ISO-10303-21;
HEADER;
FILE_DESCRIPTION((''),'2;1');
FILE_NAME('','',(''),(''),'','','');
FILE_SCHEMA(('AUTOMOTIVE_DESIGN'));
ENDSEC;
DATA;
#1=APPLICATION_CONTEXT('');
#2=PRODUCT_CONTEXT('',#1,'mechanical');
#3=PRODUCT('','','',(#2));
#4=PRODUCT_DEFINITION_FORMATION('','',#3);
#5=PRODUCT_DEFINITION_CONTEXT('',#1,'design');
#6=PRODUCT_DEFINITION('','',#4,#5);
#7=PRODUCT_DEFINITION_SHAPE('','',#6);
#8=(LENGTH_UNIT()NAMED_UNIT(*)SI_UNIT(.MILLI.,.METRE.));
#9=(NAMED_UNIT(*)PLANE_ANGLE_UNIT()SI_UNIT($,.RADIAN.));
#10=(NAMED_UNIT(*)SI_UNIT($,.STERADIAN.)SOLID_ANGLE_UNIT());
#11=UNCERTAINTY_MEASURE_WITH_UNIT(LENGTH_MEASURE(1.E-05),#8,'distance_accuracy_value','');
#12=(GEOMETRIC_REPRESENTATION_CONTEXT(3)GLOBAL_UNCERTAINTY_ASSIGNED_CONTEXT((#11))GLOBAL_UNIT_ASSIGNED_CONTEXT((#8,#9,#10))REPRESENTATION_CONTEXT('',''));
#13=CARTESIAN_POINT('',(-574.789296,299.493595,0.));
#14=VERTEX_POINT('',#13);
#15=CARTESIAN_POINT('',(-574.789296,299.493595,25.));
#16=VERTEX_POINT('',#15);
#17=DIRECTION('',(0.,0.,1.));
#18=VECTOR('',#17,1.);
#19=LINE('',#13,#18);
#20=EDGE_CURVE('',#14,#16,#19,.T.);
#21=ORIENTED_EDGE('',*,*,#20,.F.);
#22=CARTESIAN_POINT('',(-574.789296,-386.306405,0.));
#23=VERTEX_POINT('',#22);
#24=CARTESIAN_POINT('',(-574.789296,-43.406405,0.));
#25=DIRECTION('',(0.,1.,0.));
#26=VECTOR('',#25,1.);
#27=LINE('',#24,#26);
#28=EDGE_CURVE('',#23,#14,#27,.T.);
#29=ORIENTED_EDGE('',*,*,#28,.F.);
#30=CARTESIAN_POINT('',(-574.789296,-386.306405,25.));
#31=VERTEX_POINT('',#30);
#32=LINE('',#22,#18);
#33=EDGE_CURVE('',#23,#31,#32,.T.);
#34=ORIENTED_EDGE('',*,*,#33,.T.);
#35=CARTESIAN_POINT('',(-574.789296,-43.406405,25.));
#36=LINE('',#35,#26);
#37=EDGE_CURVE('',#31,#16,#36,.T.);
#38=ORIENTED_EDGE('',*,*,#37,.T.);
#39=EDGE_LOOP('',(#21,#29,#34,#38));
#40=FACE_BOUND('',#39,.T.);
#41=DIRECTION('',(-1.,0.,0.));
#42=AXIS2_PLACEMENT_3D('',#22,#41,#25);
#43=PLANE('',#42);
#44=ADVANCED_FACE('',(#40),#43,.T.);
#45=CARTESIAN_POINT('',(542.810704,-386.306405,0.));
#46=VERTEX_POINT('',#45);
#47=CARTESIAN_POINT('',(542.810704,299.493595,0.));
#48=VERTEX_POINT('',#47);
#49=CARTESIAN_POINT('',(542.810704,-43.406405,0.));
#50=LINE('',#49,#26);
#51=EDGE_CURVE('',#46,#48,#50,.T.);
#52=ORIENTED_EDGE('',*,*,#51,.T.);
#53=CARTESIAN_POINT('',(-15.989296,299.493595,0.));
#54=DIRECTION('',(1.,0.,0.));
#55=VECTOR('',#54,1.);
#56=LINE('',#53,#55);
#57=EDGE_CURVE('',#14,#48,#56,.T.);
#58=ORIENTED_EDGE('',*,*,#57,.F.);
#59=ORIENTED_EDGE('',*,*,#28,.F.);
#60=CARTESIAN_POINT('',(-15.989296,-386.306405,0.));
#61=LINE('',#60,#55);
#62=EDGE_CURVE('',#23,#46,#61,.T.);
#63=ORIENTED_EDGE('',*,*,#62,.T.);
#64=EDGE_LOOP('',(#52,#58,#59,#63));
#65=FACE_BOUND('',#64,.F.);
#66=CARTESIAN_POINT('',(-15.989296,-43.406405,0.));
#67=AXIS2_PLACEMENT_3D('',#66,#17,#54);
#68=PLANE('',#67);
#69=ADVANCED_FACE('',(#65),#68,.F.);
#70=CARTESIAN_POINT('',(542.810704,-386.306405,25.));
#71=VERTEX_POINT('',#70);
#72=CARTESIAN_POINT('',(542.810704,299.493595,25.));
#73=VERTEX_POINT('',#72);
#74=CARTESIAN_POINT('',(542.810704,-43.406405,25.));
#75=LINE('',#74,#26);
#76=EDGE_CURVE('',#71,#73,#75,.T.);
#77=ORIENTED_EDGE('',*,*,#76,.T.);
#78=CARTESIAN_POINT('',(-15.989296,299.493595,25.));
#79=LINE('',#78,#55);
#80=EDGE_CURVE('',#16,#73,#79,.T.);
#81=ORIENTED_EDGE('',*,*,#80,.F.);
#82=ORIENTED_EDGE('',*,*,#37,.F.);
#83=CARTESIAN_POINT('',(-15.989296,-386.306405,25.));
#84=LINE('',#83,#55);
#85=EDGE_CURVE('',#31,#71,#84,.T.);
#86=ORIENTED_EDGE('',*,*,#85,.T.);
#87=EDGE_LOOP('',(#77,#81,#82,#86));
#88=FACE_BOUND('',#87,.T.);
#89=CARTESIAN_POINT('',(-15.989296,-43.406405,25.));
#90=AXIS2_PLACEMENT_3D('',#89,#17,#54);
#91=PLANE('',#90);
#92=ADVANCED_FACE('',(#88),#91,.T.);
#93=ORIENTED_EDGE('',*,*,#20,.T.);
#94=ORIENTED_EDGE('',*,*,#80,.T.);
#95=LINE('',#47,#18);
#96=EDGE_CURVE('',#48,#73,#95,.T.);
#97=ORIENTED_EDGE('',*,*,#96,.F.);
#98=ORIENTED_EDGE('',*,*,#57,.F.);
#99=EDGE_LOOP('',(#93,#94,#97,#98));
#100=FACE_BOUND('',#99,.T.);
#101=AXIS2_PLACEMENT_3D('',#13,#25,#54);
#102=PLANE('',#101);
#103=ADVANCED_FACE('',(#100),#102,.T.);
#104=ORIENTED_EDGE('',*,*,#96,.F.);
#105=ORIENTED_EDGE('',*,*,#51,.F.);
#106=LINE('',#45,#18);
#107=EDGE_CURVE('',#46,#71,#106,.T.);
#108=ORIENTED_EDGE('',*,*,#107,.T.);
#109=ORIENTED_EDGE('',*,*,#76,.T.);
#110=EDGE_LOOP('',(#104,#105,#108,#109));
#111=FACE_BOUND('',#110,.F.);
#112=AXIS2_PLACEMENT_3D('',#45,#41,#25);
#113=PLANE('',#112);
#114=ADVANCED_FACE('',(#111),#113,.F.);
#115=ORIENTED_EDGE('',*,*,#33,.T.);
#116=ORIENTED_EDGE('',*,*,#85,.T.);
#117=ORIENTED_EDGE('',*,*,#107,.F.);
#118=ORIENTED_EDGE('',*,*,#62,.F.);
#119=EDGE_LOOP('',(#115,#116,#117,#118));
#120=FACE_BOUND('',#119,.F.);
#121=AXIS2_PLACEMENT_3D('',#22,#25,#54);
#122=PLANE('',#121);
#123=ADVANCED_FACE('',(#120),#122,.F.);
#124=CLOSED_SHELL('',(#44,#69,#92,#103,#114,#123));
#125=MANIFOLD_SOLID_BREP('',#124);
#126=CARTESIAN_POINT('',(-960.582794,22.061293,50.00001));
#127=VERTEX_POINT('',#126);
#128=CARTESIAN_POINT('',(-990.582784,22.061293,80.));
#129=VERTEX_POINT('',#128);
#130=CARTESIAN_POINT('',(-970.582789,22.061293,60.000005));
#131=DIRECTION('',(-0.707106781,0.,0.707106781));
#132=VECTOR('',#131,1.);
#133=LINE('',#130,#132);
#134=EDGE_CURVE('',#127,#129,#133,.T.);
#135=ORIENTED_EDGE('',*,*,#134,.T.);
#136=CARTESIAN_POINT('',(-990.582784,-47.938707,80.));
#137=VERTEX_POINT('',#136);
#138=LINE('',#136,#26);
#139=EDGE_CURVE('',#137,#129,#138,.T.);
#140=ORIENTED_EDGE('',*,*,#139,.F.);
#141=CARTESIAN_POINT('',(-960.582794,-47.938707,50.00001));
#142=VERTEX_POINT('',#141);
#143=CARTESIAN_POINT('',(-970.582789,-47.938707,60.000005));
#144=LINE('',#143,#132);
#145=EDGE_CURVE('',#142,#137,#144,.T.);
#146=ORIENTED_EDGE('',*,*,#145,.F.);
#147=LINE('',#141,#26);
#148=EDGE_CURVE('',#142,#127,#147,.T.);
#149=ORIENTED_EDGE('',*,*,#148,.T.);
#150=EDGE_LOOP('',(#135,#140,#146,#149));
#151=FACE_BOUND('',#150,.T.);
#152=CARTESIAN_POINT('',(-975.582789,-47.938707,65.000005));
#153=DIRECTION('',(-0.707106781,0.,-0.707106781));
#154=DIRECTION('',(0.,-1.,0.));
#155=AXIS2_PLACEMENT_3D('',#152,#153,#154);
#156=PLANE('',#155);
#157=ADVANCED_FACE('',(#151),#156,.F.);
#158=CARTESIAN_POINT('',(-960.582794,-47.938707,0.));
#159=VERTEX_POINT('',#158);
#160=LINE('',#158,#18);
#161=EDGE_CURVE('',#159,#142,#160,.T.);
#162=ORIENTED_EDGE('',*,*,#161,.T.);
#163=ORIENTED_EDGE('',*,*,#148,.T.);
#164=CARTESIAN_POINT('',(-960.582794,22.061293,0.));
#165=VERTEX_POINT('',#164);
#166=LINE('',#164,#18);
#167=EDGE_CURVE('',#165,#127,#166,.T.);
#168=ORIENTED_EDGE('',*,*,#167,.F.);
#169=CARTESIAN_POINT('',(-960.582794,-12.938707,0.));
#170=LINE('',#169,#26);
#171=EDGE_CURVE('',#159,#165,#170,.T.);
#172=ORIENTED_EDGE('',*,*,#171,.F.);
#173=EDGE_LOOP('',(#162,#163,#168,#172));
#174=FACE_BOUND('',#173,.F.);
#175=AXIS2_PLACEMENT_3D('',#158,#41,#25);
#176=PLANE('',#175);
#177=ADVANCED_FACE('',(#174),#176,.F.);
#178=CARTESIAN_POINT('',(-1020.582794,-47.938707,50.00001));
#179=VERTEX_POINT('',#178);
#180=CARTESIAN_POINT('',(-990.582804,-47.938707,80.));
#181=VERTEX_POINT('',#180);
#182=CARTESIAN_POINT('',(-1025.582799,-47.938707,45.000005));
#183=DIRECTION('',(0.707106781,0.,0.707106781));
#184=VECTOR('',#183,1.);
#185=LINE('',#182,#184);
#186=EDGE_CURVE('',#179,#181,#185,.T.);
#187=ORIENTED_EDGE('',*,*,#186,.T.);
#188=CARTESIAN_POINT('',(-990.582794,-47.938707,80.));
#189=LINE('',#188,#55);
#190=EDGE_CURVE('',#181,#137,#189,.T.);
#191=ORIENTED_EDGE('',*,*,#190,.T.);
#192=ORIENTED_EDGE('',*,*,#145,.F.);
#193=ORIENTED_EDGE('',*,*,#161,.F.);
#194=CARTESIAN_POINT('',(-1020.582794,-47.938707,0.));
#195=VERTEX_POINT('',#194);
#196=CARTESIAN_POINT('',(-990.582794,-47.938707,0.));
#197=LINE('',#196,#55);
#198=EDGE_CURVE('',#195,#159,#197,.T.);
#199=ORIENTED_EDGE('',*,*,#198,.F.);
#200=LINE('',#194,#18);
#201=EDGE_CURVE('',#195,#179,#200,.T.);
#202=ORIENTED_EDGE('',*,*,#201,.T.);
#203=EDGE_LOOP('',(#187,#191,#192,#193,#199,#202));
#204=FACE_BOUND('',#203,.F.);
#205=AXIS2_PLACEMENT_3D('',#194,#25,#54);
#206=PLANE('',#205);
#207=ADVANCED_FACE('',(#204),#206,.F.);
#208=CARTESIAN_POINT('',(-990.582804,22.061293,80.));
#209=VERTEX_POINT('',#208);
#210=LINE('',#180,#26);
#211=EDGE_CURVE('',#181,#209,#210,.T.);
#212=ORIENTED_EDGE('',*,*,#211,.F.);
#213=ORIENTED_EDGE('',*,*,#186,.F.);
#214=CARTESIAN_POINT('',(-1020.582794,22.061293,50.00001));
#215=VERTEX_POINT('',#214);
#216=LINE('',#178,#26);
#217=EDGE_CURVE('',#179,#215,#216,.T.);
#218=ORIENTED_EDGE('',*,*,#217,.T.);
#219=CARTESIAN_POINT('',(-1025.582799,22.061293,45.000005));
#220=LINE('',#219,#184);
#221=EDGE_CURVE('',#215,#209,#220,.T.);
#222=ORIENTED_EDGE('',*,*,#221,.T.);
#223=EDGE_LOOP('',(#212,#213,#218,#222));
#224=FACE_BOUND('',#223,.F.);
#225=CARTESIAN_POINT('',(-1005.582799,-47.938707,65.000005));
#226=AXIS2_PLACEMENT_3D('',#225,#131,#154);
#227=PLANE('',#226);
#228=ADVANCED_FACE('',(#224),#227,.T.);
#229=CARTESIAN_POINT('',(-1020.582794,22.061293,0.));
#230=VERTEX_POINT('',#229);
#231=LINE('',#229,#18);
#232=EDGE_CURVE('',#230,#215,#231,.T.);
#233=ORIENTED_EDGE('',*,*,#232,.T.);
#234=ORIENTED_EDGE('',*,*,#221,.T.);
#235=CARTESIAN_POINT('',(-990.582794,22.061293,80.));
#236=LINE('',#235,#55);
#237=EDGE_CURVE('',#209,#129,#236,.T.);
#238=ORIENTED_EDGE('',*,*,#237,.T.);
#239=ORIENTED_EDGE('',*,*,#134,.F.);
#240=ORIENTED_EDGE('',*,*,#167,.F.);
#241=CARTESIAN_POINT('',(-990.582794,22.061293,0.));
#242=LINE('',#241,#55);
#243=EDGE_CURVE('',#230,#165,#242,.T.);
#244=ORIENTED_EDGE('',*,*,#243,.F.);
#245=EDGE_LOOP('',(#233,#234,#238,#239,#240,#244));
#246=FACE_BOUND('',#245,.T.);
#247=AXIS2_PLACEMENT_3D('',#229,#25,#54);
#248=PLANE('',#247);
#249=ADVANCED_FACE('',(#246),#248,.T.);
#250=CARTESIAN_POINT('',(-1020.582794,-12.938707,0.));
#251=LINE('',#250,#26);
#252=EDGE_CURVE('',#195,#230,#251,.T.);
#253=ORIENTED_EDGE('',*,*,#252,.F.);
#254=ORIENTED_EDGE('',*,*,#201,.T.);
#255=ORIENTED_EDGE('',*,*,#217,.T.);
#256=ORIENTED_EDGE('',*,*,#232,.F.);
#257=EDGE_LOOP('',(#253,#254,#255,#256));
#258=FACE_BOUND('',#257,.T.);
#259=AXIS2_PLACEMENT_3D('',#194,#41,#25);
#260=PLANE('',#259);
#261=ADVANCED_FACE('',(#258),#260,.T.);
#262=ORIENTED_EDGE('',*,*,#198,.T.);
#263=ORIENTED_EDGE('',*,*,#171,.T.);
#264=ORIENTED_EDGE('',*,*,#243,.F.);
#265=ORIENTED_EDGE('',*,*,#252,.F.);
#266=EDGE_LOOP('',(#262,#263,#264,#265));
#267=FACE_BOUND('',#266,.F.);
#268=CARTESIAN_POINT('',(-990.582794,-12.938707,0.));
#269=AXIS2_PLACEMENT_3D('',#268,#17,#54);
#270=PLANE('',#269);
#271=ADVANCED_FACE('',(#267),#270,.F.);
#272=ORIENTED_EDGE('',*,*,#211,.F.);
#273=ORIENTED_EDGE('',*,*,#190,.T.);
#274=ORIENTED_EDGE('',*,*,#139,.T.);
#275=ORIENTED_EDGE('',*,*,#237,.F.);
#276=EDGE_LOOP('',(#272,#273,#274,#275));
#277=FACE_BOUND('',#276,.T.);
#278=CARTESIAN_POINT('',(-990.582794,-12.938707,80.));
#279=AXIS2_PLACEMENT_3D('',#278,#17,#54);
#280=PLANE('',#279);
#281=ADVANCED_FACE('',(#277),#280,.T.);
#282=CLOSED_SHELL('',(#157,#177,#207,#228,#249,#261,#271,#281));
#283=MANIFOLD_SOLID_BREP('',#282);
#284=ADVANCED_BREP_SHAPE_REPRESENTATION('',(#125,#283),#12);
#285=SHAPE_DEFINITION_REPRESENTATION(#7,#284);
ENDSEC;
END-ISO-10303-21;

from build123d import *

# Parameters (mm, degrees)
F0_W     = 1117.6
F0_H     = 685.8
F1_DEPTH = 25
F2_W     = 60
F2_H     = 70
F3_DEPTH = 80
F4_SIZE  = 29.99999


# Not quite as in the source:
# - a fillet or chamfer is up to 0.001 mm smaller than in the source, because OpenCascade refuses the exact size


with BuildPart() as f1:
    # F0 (on Top) → F1 (new body)
    with BuildSketch(Plane.XY):
        with Locations((-15.9892961383, -43.4064045523)):
            Rectangle(F0_W, F0_H)
    extrude(amount=F1_DEPTH)


with BuildPart() as f3:
    # F2 (on Top) → F3 (new body)
    with BuildSketch(Plane.XY):
        with Locations((-990.582793951, -12.9387065261)):
            Rectangle(F2_W, F2_H)
    extrude(amount=F3_DEPTH)

    # F4 (size 30 in the source; OpenCascade refuses exactly that, so slightly less here)
    f4_edges = [f3.edges().sort_by_distance(p)[0] for p in [
        (-1020.582794, -12.938707, 80),
        (-960.582794, -12.938707, 80),
    ]]
    chamfer(f4_edges, length=F4_SIZE)


solid = Compound([f1.part, f3.part])
